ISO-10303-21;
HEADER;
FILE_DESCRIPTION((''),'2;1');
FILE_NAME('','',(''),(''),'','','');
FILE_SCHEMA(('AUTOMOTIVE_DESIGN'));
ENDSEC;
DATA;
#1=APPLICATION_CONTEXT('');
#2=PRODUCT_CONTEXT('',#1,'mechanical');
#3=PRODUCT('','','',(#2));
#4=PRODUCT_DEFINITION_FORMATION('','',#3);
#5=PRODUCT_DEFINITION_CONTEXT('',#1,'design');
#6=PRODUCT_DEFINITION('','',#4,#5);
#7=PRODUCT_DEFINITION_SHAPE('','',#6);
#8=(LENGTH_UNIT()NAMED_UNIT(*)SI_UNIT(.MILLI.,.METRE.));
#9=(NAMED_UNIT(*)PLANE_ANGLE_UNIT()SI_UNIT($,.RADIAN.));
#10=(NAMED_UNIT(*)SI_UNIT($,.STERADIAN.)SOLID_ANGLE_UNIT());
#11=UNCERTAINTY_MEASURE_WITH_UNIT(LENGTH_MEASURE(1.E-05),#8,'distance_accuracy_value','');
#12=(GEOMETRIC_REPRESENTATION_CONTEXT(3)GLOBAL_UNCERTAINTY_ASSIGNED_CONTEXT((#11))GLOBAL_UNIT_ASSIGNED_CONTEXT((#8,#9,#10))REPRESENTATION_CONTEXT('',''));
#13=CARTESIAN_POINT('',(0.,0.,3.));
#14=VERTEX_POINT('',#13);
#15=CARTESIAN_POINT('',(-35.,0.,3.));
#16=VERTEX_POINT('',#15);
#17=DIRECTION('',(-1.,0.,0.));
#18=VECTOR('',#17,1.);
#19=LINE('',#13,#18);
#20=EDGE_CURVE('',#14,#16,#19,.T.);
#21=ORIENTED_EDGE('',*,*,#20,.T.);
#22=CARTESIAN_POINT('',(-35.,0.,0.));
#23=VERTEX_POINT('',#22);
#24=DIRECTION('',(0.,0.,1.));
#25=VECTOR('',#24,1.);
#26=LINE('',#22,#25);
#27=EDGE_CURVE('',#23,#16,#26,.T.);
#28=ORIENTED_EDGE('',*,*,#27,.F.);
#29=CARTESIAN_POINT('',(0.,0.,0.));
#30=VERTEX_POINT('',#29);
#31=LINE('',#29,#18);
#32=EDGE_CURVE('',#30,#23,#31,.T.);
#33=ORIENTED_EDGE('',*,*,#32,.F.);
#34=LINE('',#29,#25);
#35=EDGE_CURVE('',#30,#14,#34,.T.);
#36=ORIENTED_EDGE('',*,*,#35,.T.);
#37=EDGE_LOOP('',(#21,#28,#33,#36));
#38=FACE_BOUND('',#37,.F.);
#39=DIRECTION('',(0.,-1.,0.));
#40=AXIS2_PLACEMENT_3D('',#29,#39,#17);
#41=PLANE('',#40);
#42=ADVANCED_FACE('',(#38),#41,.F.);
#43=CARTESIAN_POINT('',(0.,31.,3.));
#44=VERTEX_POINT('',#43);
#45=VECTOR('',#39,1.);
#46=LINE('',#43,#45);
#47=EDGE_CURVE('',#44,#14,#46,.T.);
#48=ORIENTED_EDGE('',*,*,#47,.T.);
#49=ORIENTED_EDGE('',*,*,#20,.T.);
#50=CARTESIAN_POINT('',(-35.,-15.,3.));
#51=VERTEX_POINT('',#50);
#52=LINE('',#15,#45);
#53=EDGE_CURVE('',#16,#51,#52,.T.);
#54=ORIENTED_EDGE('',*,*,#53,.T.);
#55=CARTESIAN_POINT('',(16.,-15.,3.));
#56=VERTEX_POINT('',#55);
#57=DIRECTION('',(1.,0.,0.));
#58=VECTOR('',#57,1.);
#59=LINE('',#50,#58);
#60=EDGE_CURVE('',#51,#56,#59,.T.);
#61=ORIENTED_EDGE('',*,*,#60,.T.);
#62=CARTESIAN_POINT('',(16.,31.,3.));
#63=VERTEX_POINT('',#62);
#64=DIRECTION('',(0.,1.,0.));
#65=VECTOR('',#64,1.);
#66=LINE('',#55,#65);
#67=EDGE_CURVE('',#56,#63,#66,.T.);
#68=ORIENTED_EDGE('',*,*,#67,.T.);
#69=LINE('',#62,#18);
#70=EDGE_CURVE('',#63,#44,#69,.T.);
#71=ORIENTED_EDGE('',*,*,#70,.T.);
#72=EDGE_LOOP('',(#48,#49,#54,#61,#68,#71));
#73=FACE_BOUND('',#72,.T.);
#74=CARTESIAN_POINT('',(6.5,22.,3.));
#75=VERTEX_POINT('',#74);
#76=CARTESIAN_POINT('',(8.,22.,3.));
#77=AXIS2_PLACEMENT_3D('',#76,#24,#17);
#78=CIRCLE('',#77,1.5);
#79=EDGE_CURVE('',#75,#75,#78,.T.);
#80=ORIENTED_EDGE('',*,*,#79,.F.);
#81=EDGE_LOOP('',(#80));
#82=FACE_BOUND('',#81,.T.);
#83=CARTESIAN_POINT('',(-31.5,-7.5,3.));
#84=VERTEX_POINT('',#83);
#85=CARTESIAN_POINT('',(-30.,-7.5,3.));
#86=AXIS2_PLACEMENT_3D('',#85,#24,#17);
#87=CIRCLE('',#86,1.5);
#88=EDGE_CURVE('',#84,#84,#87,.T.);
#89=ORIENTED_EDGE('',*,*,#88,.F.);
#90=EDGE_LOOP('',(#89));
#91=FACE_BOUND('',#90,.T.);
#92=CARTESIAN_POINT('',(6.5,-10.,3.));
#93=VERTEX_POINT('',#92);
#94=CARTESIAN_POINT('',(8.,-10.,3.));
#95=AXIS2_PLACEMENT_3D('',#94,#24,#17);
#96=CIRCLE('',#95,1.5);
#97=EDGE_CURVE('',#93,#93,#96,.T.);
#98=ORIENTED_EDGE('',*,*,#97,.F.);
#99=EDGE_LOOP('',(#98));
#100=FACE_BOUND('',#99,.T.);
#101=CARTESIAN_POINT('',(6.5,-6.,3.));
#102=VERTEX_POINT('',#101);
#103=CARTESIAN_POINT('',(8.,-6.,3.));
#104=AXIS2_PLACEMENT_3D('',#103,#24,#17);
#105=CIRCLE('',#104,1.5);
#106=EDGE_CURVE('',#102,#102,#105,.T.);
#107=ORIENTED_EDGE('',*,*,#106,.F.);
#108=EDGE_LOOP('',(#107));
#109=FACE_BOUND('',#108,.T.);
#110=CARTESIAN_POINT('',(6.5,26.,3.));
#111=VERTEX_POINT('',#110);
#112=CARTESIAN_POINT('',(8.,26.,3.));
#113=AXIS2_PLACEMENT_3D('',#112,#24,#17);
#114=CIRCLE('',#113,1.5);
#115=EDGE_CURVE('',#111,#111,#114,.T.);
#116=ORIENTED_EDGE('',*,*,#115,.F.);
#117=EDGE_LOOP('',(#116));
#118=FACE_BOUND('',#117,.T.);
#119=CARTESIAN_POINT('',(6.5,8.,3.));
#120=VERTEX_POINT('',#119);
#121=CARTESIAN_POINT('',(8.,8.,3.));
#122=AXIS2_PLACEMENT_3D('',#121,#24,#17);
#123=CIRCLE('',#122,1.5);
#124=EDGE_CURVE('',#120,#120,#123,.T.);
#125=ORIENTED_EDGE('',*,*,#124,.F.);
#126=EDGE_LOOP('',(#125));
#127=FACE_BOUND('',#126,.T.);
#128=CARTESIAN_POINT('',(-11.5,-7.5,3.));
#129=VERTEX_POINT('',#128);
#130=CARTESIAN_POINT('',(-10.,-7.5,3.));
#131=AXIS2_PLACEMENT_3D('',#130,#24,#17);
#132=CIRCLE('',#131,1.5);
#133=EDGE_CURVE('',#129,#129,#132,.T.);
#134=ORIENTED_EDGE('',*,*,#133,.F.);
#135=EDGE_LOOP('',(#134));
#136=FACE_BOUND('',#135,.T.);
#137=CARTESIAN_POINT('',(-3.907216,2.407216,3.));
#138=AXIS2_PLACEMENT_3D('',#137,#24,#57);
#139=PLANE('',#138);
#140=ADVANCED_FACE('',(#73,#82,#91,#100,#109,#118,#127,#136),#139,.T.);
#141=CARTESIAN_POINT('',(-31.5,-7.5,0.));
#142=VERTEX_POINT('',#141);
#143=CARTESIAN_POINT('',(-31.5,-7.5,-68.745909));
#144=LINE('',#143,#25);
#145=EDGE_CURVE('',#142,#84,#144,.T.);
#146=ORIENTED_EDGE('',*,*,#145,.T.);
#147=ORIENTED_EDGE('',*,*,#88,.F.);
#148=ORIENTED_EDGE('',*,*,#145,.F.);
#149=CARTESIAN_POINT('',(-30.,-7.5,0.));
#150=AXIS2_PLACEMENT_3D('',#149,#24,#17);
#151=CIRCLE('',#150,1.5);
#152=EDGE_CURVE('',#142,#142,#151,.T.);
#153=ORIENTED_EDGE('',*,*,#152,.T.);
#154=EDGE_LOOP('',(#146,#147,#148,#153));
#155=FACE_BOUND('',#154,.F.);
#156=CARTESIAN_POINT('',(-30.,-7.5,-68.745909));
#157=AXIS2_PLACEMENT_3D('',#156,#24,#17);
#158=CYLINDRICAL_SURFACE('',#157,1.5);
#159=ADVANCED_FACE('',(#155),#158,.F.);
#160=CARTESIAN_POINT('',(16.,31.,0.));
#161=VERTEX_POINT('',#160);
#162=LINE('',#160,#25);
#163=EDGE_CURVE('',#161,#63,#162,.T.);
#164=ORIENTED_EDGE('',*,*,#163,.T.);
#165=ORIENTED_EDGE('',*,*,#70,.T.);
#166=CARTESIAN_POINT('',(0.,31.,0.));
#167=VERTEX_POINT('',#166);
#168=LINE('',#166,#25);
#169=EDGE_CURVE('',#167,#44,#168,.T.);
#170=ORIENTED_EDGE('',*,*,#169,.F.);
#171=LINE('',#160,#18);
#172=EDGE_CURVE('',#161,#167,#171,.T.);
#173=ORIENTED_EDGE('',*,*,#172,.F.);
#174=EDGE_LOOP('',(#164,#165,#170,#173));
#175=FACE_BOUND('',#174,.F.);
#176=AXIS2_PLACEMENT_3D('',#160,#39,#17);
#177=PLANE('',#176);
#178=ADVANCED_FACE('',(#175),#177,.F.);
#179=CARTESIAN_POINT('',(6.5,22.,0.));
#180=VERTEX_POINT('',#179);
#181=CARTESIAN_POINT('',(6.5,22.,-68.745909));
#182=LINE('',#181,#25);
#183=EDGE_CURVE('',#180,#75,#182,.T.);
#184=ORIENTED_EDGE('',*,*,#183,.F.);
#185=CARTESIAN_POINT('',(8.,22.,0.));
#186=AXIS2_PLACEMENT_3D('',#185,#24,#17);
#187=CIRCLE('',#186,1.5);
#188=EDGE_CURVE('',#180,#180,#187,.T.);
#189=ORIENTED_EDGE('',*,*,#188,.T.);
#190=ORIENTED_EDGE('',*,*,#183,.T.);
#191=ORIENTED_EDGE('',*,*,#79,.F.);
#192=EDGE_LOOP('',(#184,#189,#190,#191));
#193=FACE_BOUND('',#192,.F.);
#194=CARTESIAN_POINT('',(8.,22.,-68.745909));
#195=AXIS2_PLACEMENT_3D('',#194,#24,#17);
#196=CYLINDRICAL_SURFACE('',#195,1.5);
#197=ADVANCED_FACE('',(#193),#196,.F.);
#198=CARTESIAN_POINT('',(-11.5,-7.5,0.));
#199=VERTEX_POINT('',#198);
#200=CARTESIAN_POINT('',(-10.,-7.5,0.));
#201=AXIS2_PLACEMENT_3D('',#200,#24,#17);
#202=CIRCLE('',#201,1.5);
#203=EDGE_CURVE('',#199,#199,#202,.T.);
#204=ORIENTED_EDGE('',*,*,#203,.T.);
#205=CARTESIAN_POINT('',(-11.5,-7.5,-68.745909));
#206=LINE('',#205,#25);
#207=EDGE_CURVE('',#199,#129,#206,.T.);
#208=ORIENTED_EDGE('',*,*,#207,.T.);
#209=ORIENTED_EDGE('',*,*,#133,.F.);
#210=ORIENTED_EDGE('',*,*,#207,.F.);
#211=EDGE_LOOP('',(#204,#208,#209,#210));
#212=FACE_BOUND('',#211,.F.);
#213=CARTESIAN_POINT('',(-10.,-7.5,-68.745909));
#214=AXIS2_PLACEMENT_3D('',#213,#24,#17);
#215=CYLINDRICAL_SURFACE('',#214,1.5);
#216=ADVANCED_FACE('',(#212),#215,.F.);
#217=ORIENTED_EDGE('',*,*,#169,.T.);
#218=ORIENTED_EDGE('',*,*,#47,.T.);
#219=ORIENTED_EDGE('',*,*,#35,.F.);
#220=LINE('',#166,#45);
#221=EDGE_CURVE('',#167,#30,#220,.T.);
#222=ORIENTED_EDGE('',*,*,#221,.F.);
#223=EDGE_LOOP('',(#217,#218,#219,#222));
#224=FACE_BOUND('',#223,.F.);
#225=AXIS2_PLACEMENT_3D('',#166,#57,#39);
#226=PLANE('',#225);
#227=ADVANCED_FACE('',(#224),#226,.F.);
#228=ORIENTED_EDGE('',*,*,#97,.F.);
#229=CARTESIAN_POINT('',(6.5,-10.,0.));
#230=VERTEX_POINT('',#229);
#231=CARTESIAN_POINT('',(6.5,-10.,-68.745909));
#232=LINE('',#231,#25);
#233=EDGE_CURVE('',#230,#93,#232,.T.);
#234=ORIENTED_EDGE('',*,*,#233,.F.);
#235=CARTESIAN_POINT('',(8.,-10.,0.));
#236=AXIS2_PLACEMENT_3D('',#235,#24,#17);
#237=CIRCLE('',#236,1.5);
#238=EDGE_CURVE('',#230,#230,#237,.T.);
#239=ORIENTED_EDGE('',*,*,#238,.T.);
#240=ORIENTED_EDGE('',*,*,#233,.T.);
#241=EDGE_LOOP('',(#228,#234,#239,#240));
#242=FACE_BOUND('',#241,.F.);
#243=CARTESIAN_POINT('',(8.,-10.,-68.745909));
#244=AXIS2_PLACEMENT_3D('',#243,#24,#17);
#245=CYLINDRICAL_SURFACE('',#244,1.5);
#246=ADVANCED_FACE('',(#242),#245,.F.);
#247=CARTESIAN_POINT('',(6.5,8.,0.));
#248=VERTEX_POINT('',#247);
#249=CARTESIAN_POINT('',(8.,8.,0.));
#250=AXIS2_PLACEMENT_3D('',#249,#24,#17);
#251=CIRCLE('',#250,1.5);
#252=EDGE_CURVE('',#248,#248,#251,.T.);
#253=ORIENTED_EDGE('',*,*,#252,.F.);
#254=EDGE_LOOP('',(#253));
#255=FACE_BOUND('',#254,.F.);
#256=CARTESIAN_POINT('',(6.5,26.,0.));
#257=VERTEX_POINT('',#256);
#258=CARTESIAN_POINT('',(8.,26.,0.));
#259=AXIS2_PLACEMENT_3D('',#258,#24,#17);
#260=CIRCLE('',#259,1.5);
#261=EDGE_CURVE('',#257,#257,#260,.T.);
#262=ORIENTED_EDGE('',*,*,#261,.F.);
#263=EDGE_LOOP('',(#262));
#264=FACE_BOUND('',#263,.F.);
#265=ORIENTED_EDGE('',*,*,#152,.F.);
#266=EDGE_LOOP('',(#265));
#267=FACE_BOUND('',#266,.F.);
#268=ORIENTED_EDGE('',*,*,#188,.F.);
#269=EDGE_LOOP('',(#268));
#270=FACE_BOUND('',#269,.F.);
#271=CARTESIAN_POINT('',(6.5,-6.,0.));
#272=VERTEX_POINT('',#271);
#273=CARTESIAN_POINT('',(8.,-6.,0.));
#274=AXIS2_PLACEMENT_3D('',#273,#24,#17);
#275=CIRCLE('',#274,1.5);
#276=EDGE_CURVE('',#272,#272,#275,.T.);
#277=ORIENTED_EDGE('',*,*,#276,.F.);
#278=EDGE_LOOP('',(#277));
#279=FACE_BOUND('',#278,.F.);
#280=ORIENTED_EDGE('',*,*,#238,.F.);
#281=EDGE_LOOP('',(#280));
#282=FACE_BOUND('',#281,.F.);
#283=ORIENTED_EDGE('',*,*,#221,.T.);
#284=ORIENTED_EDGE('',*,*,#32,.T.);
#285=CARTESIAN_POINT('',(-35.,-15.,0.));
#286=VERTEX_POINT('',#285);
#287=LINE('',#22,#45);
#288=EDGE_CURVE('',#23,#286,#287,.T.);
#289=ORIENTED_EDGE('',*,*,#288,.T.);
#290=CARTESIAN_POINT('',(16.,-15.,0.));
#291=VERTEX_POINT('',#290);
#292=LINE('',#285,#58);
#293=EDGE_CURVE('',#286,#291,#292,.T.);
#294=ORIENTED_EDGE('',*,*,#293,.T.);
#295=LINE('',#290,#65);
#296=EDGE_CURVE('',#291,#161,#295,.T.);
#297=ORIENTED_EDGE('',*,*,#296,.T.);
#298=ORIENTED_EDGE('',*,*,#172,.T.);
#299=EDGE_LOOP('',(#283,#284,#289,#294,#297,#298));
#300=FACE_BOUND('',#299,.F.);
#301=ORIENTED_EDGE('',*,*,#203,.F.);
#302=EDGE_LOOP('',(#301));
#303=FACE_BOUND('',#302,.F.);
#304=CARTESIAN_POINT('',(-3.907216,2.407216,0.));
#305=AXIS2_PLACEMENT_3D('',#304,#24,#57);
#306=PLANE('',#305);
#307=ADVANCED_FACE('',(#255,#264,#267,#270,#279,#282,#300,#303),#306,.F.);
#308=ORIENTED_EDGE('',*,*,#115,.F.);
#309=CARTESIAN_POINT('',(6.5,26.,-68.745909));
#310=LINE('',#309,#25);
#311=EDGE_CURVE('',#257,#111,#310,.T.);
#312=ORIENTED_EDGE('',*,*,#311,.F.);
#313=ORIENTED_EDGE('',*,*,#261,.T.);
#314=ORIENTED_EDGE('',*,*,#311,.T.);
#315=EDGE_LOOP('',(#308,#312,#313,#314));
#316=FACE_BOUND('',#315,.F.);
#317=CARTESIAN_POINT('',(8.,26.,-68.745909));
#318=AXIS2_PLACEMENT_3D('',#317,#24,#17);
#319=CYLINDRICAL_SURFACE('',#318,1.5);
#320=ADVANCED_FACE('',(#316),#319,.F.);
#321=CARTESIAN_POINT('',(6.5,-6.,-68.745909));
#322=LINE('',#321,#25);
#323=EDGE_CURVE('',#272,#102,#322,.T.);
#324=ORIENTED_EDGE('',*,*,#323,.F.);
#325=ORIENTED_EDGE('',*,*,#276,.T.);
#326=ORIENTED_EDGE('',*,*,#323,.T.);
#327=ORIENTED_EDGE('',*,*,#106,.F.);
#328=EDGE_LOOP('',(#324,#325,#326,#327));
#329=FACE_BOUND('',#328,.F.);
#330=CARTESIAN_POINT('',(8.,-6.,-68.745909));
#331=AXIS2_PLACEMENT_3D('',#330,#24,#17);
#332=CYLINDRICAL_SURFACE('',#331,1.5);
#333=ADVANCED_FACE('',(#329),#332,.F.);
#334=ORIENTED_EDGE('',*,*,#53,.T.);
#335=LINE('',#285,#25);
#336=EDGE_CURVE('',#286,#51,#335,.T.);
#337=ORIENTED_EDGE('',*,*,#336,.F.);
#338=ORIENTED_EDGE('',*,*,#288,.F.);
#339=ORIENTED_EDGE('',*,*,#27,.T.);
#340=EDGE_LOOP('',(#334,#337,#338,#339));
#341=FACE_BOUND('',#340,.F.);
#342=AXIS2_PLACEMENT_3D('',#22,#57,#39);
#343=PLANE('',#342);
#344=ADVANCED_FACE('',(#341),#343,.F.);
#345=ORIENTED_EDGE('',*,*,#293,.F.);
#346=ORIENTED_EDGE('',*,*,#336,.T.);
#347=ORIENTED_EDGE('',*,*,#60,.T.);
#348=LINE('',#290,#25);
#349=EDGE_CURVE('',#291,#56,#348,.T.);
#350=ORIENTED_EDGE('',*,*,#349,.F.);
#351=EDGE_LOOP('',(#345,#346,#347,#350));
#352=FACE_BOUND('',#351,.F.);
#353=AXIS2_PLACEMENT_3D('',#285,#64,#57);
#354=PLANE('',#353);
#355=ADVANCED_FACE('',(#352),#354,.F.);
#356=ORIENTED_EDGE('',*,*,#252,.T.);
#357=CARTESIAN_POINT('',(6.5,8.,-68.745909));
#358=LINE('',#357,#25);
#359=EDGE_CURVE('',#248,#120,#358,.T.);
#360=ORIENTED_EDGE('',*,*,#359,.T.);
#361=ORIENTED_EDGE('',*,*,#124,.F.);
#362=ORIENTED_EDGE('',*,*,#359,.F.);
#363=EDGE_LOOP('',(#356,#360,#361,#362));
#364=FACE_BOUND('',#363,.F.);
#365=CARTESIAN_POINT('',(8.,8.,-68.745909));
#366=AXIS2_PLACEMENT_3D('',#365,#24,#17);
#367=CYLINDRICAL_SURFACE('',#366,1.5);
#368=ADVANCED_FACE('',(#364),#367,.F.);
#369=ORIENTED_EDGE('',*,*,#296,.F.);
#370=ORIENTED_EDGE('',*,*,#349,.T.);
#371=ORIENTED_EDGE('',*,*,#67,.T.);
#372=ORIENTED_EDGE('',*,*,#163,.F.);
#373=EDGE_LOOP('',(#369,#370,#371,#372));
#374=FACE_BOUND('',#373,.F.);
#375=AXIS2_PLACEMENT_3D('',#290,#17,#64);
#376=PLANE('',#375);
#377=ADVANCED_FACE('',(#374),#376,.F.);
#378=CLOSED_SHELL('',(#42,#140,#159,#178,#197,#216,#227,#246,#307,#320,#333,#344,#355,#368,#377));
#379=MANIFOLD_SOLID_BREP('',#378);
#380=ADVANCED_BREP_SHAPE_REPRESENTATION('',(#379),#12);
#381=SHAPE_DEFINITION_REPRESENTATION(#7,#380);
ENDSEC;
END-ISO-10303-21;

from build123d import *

# Parameters (mm, degrees)
F1_DEPTH = 3
F2_D     = 3


# Not quite as in the source:
# - a feature names something its author has since deleted; it is built from what else it names


with BuildPart() as f1:
    # F0 (on Top) → F1 (new body)
    with BuildSketch(Plane.XY):
        Polygon((0, 31), (0, 0), (-35, 0), (-35, -15), (0, -15), (16, -15), (16, 31), align=None)
    extrude(amount=F1_DEPTH)

    # F2 (through all)
    with Locations(Plane(origin=(0, 0, 0), x_dir=(1, 0, 0), z_dir=(0, 0, -1))):
        with Locations((8, -8), (8, -22), (-10, 7.5), (-30, 7.5), (8, 6), (8, -26), (8, 10)):
            Hole(F2_D / 2)


solid = f1.part
